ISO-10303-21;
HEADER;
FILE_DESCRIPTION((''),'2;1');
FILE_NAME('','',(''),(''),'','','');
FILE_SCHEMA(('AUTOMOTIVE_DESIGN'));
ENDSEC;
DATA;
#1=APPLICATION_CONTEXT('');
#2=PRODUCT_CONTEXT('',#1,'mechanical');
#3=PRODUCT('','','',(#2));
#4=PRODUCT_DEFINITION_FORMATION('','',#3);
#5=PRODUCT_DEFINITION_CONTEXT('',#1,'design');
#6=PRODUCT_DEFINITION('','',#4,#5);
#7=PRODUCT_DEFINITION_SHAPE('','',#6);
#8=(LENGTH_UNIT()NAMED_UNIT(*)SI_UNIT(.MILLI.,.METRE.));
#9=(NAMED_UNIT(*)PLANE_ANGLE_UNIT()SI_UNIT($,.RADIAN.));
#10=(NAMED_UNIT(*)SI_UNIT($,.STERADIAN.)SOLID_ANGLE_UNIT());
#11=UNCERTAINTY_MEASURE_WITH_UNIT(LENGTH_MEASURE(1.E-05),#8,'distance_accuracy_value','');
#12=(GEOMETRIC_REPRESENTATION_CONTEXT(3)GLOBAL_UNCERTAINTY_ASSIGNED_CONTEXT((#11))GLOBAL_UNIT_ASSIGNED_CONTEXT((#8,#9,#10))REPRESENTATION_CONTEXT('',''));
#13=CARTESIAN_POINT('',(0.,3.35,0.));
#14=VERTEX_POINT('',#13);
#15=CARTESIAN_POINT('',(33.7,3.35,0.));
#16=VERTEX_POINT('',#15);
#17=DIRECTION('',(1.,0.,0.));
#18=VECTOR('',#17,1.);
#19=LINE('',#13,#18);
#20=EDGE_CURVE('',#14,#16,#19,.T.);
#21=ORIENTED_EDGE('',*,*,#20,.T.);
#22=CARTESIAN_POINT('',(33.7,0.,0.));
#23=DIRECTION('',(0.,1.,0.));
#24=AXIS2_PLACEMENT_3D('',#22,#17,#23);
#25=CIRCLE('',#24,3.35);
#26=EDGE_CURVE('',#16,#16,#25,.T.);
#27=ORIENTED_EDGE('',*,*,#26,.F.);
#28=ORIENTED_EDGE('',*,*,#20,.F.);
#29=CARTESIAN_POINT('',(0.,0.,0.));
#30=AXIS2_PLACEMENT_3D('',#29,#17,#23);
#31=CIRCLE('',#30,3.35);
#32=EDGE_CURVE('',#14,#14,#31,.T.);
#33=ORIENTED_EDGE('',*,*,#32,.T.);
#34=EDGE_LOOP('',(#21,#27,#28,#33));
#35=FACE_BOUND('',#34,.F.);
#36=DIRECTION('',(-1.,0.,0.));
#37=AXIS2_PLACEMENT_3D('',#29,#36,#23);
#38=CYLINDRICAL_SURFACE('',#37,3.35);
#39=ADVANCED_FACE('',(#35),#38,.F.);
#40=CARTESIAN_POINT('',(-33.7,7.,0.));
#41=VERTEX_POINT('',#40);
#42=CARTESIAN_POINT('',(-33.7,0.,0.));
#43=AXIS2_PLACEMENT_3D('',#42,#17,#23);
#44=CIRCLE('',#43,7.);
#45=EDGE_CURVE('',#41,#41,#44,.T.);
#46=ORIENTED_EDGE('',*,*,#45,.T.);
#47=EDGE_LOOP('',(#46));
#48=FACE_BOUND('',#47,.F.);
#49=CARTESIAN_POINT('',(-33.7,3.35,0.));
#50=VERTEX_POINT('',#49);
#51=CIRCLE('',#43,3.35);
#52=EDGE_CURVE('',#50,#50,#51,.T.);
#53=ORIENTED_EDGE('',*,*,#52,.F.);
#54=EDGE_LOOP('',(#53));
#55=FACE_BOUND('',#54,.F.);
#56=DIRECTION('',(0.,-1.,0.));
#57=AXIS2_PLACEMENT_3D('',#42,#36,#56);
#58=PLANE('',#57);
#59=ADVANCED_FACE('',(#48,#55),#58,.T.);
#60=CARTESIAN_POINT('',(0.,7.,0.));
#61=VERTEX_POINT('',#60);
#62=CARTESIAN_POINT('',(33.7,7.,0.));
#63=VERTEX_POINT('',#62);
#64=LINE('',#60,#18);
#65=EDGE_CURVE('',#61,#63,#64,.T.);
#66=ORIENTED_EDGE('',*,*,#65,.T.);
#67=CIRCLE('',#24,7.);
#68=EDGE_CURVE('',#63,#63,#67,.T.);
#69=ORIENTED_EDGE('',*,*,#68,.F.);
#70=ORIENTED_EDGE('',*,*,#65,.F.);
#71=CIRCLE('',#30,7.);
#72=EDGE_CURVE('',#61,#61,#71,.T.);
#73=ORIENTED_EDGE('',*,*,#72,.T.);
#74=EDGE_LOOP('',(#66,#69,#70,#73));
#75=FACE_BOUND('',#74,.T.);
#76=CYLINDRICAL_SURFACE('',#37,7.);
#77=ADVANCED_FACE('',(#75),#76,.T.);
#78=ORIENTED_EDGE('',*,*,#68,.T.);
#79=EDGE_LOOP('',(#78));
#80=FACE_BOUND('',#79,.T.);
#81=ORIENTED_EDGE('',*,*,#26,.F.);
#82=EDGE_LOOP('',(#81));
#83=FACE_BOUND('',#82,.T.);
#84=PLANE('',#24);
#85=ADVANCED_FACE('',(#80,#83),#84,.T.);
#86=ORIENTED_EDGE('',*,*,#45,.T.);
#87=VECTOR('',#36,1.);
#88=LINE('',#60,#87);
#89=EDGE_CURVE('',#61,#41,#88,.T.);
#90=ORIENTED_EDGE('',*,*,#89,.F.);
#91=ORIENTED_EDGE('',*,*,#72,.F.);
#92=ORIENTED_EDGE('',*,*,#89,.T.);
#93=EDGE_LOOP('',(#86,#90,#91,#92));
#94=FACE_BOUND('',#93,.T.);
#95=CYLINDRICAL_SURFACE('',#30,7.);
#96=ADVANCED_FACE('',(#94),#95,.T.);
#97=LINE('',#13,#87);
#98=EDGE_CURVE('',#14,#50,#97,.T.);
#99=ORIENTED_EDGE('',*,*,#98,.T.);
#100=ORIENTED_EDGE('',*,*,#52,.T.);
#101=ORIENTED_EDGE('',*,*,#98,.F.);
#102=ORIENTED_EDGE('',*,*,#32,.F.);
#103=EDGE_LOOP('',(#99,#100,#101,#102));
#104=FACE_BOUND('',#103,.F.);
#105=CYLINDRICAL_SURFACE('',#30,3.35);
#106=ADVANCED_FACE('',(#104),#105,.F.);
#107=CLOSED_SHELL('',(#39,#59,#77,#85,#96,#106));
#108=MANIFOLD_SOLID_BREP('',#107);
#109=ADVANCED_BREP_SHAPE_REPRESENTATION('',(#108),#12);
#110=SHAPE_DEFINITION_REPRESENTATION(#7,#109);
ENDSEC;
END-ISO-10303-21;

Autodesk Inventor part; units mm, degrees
ref_plane "YZ Plane" through (0, 0, 0) normal (1, 0, 0) x (0, 1, 0)
ref_plane "XZ Plane" through (0, 0, 0) normal (0, 1, 0) x (-1, 0, 0)
ref_plane "XY Plane" through (0, 0, 0) normal (0, 0, 1) x (1, 0, 0)
sketch "Skizze1" plane through (0, 0, 0) normal (1, 0, 0) x (0, 1, 0)
  circle A0 centre (0, 0) radius 3.35
  circle A1 centre (0, 0) radius 7
  dimension "d0" = 6.7
  dimension "d1" = 14
extrude "Extrusion1" add sketch "Skizze1" along normal blind 33.7
sketch "Skizze3" plane through (0, 0, 0) normal (0, 1, 0) x (-1, 0, 0)
  line L0 (-33.7, 7) -> (-29.7, 7)
  line L1 (-29.7, 7) -> (-29.8763, 8)
  line L2 (-29.8763, 8) -> (-33.7, 7)
  line L3 (-33.7, 7) -> (-33.7, -7) construction
  line L4 (0, -7) -> (0, 7) construction
  line L5 (-36.7, 7) -> (-36.8763, 8) construction
  circle A0 centre (-33.6009, 29.249) radius 21.5 construction
  line L6 (-28.161, 8.4486) -> (-33.6009, 29.249) construction
  line L7 (-29.8763, 8) -> (-36.8763, 8) construction
  point P0 (0, 0)
  dimension "d98" = 43
  dimension "d16" = 4
  dimension "d17" = 80
  dimension "d18" = 1
  dimension "d96" = 7
  dimension "d126" = 14.656
feature "Spirale1" [suppressed]
sketch "Skizze20" plane through (18.7, -3.5355, -3.5355) normal (0, 0.7071068, -0.7071068) x (1, 0, 0)
  line L0 (4, 0) -> (0, 0) projected
  line L1 (4, 0) -> (0.1763, 1) projected
  line L2 (0.1763, 1) -> (0, 0) projected
  point P0 (-18.7, -5)
feature "Spirale3" [suppressed]
sketch "Skizze24" plane through (10.7739, 3.0836, -3.9359) normal (0, 0.7871835, 0.6167189) x (1, 0, 0)
  line L0 (2.323, 0) -> (0, 0) projected
  line L1 (2.323, 0) -> (0.1024, 0.5807) projected
  line L2 (0.1024, 0.5807) -> (0, 0) projected
  point P0 (-10.7739, -5)
feature "Spirale4" [suppressed]
mirror "Spiegeln2" about plane through (0, 0, 0) normal (1, 0, 0) of "Extrusion1"
sketch "Skizze25" plane through (2.8479, -4.8082, 1.3717) normal (0, -0.2743466, -0.9616309) x (1, 0, 0)
  circle A0 centre (-2.8479, 21.4682) radius 21.5
  circle A1 centre (1.449, 21.6145) radius 21.5
  circle A2 centre (13.3899, 22.0495) radius 21.5
  point P0 (-2.8479, -5)
  point P1 (-5.7242, 0.1615)
  point P2 (0.0285, 0.1615)
  dimension "d163" = 43
  dimension "d162" = 43
  dimension "d164" = 43
sketch "Skizze26" plane through (0, 0, 0) normal (0, 0, 1) x (1, 0, 0)
  line L0 (-33.7, -7) -> (-33.7, 7) construction
  line L1 (33.7, -7) -> (33.7, 7) construction
  arc A0 (-33.7, 7) -> (33.7, 7) centre (0, 574.345) ccw
  line L2 (-33.7, 6) -> (33.7, 6) construction
  line L3 (-33.7, 7) -> (33.7, 7)
  line L4 (-33.7, 0) -> (33.7, 0)
  point P0 (0, 0)
  dimension "d165" = 1
revolve "Umdrehung5" [suppressed]
properties part number "Dribblerschnecke v2" material "Gummi, Silikon"
